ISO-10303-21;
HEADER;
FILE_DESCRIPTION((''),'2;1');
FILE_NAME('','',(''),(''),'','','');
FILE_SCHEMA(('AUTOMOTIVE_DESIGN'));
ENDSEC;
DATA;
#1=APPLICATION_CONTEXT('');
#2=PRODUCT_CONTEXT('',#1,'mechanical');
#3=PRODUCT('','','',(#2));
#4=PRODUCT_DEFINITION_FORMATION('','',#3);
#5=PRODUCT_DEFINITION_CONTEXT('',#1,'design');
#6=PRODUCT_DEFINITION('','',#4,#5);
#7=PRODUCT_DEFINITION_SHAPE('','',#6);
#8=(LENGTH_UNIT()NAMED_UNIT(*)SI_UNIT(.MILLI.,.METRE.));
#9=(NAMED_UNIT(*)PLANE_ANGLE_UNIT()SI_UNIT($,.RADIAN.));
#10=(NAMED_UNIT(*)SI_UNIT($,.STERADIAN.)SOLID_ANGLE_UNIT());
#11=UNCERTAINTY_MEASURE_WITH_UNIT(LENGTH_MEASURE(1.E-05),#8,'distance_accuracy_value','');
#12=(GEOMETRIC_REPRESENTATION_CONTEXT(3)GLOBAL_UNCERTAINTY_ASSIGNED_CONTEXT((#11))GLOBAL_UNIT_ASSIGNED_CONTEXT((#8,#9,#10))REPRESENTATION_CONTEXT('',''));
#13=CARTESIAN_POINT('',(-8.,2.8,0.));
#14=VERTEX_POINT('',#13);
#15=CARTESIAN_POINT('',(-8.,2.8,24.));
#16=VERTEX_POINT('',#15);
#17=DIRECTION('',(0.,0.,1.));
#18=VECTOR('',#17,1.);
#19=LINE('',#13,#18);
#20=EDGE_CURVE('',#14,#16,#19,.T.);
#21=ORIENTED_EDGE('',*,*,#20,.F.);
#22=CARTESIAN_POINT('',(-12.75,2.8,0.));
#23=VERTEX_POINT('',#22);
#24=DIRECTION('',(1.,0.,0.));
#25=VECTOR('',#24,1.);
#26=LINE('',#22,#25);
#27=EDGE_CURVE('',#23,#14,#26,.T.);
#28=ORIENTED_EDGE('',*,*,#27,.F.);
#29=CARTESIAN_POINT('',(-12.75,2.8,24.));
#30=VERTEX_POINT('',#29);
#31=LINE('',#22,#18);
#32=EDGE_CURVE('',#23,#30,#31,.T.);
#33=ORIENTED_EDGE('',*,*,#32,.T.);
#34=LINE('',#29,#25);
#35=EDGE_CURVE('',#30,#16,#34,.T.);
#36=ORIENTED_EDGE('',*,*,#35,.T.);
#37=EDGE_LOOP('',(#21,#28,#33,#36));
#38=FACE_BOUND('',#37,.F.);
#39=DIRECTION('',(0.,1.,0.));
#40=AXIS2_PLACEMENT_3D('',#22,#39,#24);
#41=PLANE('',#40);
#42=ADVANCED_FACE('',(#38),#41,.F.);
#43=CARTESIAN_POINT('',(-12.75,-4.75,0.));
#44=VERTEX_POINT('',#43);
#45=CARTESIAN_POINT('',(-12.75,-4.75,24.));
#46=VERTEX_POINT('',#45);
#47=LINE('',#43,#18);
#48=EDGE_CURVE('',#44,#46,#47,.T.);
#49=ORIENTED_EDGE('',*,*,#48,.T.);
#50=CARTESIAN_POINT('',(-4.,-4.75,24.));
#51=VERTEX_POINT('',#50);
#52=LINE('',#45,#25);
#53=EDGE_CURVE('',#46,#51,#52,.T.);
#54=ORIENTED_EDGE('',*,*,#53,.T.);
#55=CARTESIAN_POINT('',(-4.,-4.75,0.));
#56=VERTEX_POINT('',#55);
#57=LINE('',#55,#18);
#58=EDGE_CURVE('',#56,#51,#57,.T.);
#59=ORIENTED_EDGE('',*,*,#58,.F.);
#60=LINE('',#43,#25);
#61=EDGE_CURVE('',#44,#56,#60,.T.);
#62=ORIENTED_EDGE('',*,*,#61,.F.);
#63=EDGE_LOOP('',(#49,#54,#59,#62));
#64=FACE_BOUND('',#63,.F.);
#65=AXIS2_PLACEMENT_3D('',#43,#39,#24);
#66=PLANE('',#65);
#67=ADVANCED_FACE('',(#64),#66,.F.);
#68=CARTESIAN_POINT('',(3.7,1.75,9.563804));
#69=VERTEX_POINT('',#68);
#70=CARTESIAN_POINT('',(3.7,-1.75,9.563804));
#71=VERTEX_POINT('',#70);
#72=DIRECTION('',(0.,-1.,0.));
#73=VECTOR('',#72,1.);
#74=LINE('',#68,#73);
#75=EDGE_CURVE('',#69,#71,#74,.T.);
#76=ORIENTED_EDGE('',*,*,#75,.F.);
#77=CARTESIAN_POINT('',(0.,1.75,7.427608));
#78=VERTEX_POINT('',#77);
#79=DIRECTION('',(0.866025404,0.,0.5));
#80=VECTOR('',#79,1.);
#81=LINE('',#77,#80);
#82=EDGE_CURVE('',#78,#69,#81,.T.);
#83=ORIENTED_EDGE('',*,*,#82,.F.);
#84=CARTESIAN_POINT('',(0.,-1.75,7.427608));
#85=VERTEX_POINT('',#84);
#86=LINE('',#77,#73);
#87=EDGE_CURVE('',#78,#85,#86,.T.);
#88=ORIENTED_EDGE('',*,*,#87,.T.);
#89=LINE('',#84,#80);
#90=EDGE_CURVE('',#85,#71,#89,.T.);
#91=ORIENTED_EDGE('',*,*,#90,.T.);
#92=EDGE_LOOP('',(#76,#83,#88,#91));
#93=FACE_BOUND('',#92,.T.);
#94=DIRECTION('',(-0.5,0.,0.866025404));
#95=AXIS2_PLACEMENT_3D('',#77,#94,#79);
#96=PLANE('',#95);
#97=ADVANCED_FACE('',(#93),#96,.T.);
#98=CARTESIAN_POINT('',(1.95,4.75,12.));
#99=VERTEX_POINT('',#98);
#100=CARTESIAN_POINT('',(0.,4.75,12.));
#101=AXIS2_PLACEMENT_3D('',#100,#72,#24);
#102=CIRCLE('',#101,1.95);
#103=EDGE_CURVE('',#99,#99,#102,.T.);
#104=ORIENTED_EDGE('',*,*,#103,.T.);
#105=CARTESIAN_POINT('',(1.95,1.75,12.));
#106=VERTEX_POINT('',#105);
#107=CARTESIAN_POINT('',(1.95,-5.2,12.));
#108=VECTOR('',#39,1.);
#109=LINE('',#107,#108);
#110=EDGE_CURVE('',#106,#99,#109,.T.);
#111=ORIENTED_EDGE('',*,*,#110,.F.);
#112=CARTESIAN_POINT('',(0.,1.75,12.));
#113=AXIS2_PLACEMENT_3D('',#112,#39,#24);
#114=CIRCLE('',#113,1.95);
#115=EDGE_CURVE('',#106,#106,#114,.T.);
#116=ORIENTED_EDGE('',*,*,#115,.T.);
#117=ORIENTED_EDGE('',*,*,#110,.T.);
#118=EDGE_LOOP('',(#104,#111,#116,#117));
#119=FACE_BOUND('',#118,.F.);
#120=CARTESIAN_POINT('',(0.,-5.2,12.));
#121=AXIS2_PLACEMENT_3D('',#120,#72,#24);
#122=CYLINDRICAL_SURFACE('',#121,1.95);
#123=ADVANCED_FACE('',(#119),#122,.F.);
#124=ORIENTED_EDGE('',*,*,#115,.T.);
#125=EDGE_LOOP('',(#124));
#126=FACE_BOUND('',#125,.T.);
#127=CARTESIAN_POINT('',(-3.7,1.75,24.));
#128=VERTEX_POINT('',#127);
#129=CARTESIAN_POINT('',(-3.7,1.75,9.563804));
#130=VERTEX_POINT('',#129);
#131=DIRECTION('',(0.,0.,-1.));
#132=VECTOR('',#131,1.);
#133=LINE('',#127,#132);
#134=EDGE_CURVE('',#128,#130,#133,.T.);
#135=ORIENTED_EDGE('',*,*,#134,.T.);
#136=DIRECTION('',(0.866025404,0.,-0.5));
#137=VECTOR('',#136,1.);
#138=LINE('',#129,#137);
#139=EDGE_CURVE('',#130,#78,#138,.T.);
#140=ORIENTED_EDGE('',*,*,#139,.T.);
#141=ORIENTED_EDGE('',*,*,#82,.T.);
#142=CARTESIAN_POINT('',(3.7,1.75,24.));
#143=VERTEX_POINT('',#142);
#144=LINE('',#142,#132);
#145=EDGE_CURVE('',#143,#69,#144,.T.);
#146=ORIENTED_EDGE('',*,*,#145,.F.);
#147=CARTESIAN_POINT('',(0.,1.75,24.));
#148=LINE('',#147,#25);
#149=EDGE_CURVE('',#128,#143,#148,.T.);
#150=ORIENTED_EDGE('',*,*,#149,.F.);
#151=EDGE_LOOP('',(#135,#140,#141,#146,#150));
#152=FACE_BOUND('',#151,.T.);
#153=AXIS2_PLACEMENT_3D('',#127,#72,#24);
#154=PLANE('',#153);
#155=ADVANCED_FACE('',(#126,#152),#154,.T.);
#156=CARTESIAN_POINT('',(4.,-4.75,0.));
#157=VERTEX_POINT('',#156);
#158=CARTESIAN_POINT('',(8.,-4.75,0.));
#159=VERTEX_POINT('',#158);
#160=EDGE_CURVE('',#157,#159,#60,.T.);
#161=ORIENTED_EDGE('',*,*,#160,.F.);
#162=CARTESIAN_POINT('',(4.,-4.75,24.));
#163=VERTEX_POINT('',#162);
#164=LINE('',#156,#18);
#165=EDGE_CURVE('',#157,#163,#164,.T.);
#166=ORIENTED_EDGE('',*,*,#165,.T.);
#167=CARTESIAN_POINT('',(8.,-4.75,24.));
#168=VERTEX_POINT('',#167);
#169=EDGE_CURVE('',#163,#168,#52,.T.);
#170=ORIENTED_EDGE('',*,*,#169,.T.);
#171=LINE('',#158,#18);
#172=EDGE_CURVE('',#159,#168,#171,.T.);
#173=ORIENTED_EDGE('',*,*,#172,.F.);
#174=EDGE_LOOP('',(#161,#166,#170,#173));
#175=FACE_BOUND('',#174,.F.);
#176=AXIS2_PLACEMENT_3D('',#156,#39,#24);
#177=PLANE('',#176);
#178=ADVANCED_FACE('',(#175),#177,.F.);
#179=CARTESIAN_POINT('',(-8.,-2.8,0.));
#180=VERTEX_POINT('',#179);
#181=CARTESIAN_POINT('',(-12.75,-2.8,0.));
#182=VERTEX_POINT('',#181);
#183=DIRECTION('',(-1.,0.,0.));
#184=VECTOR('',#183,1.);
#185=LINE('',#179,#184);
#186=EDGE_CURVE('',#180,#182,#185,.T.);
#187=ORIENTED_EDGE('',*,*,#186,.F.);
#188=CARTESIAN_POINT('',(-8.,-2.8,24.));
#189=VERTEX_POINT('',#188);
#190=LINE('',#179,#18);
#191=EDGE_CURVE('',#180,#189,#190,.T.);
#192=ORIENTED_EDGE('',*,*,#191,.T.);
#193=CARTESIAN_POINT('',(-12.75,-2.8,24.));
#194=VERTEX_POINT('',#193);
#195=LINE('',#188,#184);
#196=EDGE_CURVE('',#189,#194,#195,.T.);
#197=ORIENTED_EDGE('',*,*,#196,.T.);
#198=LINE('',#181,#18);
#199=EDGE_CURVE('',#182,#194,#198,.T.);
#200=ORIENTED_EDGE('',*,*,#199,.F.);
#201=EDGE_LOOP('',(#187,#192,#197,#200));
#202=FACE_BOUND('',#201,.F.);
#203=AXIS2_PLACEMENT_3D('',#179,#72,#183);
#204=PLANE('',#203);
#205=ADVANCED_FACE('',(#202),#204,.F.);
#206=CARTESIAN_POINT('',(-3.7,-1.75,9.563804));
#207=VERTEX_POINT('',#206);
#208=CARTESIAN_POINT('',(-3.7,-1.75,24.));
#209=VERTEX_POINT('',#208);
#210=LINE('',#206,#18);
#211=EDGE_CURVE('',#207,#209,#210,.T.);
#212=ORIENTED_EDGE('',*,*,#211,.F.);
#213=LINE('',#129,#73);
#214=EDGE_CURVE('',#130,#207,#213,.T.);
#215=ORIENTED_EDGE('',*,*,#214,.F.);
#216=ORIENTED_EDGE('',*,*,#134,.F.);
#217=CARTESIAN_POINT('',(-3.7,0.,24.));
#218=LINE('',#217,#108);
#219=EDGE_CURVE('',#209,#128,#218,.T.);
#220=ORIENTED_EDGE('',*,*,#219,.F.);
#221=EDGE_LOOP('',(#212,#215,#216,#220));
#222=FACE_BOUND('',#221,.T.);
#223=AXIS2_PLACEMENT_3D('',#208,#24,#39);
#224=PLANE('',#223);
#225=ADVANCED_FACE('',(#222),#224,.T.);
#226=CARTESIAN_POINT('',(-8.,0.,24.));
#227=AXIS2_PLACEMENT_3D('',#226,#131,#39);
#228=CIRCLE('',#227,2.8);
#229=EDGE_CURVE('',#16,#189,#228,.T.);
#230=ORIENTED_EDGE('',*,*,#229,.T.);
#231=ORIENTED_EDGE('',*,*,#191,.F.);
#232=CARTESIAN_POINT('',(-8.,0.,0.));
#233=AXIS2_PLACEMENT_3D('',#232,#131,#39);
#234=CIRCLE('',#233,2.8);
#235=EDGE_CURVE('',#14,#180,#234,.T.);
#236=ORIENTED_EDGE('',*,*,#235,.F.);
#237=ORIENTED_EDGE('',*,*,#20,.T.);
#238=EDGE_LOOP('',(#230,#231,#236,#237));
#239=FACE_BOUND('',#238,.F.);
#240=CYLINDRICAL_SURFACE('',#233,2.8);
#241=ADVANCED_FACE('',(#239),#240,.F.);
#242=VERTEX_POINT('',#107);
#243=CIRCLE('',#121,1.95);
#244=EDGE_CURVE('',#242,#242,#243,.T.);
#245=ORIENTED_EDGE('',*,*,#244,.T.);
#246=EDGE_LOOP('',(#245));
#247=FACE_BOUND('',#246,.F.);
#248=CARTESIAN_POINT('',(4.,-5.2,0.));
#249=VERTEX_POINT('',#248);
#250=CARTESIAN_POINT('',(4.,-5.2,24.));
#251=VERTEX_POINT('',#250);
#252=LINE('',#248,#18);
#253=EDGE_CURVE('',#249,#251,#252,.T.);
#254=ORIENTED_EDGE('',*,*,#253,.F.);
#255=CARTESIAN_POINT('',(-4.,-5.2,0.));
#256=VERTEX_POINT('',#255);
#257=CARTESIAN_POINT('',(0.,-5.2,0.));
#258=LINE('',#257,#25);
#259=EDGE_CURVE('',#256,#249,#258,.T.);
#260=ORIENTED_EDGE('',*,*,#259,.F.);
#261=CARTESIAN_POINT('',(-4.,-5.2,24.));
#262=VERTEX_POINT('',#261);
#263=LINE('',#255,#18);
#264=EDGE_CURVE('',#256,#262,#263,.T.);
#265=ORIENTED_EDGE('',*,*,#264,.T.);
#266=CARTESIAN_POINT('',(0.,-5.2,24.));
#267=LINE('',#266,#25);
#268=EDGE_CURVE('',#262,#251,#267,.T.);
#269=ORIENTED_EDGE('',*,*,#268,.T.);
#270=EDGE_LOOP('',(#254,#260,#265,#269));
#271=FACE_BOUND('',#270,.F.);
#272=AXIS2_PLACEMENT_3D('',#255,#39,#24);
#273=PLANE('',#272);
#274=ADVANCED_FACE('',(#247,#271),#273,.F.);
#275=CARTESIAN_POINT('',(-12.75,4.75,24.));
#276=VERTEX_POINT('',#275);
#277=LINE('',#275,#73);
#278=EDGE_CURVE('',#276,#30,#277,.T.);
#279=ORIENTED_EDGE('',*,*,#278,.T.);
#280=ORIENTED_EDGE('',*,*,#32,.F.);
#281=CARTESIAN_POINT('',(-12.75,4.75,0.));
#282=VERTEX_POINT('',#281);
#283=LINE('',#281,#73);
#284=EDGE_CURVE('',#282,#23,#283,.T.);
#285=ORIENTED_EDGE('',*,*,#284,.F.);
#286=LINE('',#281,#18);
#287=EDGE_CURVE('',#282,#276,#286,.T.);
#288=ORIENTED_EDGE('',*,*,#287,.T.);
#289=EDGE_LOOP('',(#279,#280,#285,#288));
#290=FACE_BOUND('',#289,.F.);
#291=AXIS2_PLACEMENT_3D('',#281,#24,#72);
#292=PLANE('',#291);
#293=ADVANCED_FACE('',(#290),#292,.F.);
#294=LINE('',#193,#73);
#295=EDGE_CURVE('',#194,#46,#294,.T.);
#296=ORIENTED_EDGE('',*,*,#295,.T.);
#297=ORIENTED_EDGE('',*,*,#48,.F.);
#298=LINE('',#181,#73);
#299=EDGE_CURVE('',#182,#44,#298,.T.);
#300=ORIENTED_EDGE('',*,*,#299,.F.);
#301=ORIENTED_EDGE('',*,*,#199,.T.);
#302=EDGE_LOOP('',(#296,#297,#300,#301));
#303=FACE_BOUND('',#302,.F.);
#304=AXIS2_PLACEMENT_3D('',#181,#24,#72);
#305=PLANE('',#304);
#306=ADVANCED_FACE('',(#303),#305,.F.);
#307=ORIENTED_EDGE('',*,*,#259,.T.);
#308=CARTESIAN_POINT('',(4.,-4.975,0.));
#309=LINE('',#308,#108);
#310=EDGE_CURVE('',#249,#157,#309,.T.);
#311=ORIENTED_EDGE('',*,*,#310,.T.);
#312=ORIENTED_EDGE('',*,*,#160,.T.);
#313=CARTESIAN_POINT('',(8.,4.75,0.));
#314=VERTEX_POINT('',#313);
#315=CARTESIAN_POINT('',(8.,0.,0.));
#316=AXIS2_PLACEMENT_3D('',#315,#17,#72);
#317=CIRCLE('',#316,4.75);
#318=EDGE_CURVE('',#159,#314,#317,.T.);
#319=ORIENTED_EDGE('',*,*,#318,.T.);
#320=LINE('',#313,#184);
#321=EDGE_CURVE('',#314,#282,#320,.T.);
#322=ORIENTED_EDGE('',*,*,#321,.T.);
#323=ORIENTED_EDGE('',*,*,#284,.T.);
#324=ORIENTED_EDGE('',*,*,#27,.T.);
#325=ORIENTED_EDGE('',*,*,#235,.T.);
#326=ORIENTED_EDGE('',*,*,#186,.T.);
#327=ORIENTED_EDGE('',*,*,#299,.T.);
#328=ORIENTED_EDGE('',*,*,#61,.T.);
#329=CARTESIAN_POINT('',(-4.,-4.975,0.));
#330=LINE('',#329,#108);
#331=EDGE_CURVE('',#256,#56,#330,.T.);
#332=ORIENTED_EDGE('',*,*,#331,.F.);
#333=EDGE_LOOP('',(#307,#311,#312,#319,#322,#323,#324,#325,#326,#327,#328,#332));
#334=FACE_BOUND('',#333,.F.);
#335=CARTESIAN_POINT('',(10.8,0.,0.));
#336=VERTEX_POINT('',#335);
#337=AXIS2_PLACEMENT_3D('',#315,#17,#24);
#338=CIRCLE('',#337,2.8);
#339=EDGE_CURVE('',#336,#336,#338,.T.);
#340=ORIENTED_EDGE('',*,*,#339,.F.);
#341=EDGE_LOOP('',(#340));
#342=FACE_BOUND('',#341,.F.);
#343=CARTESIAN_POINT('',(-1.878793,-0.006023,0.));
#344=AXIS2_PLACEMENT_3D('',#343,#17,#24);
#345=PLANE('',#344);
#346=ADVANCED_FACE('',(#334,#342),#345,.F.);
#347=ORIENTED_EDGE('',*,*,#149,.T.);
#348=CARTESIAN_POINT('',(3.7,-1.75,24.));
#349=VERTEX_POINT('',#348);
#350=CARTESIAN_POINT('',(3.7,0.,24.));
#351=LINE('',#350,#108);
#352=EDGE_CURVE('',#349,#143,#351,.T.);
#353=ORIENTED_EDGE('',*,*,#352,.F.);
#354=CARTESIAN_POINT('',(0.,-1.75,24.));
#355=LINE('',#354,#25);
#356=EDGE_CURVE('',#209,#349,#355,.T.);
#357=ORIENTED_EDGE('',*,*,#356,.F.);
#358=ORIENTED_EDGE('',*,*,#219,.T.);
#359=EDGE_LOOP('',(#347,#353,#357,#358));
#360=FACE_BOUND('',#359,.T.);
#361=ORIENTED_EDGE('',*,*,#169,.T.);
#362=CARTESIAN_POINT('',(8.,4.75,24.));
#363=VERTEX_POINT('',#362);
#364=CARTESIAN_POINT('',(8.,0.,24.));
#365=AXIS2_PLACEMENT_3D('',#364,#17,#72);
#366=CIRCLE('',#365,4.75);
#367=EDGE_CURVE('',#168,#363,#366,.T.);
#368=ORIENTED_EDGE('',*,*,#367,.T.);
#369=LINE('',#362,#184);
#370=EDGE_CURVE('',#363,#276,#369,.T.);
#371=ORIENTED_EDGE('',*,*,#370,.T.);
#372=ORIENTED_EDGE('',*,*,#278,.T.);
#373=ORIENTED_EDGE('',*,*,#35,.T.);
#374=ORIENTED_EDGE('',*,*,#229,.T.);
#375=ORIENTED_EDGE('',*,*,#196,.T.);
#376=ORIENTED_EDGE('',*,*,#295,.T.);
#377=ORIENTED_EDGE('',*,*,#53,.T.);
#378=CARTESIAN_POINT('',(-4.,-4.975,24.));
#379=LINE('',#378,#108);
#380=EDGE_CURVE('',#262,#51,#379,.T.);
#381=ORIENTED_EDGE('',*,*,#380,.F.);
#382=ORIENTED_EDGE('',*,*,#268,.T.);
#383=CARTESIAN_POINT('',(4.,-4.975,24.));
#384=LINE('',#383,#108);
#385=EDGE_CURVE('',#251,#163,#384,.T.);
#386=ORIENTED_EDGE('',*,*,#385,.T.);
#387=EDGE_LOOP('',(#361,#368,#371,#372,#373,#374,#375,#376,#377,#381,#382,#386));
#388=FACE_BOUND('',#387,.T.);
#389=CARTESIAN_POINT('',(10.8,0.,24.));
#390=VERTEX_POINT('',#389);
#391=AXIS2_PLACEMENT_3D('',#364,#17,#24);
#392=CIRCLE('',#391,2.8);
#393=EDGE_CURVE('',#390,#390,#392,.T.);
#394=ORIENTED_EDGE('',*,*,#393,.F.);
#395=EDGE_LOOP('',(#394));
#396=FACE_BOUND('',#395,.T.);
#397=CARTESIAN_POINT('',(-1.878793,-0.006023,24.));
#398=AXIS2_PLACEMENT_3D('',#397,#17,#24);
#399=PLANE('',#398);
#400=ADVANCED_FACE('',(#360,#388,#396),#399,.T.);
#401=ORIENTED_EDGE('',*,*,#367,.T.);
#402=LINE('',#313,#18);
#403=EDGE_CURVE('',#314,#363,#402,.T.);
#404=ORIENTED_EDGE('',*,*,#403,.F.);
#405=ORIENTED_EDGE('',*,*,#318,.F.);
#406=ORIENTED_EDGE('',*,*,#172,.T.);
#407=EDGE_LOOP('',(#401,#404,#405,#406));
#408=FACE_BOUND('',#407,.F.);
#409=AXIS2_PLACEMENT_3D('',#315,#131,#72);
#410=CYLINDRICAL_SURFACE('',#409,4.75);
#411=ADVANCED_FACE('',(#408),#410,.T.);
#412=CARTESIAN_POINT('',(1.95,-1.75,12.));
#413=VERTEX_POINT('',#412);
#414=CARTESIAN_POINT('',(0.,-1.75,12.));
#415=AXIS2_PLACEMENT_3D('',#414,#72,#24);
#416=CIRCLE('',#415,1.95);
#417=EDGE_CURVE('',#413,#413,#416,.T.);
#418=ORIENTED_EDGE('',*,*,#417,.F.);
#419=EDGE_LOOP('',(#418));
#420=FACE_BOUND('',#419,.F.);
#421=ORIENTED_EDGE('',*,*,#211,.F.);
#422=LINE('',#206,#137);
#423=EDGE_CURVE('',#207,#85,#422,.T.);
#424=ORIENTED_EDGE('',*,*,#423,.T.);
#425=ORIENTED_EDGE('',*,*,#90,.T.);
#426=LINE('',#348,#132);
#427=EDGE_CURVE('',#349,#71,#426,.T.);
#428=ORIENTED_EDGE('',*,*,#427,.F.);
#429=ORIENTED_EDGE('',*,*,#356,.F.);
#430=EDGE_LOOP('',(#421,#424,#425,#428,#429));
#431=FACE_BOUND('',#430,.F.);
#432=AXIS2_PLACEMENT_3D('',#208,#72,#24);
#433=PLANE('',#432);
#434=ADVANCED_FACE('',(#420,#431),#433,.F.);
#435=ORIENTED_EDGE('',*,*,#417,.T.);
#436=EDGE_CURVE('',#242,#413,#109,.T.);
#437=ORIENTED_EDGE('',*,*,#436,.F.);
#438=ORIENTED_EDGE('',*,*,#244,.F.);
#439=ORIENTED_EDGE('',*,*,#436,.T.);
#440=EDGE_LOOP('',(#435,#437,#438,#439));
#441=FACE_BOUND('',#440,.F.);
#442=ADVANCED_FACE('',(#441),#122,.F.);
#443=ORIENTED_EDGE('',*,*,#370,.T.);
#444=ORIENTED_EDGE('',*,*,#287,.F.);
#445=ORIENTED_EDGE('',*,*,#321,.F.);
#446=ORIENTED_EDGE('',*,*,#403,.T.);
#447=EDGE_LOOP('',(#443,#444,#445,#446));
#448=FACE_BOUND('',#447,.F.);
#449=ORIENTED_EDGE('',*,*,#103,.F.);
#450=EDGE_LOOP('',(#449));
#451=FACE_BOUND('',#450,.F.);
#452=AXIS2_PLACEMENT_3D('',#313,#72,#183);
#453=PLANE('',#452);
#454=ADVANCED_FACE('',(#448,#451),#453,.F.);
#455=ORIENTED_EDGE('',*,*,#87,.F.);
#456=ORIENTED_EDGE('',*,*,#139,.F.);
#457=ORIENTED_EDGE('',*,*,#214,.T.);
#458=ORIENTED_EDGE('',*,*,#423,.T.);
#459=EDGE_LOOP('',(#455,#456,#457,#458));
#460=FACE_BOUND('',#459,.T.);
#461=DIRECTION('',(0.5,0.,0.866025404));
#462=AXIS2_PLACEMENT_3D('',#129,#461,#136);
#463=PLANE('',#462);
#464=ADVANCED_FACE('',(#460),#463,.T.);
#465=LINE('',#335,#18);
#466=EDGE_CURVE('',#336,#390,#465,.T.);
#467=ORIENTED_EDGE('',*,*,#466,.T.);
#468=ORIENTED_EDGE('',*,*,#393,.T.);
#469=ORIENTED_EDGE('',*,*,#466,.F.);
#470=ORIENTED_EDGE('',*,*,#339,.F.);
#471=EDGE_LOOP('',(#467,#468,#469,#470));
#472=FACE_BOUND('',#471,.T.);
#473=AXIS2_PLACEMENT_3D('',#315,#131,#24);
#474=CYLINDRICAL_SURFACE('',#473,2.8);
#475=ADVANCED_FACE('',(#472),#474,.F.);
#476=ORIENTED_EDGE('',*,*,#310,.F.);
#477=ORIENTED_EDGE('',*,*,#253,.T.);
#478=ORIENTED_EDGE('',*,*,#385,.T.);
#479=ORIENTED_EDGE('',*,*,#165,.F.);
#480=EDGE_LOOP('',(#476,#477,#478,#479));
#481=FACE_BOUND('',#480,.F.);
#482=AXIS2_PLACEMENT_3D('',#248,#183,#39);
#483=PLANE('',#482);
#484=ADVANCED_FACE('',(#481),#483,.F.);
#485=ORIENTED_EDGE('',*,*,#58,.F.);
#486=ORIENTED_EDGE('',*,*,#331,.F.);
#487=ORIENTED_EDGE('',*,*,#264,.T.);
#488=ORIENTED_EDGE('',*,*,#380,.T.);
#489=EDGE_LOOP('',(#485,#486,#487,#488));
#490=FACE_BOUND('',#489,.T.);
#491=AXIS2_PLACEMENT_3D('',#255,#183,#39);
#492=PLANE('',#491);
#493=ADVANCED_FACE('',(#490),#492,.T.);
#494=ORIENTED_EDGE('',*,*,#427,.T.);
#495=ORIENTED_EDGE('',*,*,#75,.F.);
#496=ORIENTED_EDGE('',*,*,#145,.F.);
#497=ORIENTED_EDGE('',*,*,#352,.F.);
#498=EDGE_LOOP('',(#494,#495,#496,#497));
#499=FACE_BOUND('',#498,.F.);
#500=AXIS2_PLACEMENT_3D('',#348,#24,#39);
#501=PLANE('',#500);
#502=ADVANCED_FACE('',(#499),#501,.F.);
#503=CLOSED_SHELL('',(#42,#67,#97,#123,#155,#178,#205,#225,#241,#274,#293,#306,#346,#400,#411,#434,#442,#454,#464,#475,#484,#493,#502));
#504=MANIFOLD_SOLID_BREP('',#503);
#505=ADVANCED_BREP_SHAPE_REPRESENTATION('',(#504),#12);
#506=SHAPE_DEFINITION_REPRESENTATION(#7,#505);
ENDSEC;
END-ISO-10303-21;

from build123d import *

# Parameters (mm, degrees)
F0_R     = 2.8
F0_W     = 8
F0_H     = 0.45
F1_DEPTH = 24
F2_R     = 1.95
F3_DEPTH = 9.951
F4_W     = 7.4
F4_H     = 3.5
F5_DEPTH = 12
F7_DEPTH = 3.5


# Not quite as in the source:
# - a feature names something its author has since deleted; it is built from what else it names


with BuildPart() as f1:
    # F0 (on Top) → F1 (new body)
    with BuildSketch(Plane.XY):
        with BuildLine():
            ThreePointArc((-8, 2.8), (-5.2, 0), (-8, -2.8))
            Line((-8, -2.8), (-12.75, -2.8))
            Line((-12.75, -2.8), (-12.75, -4.75))
            Line((-12.75, -4.75), (-8, -4.75))
            Line((-8, -4.75), (-4, -4.75))
            Line((-4, -4.75), (-4, -4.3))
            Line((-4, -4.3), (4, -4.3))
            Line((4, -4.3), (4, -4.75))
            Line((4, -4.75), (8, -4.75))
            ThreePointArc((8, -4.75), (12.75, 0), (8, 4.75))
            Line((8, 4.75), (-8, 4.75))
            Line((-8, 4.75), (-12.75, 4.75))
            Line((-12.75, 4.75), (-12.75, 2.8))
            Line((-12.75, 2.8), (-8, 2.8))
        make_face()
        with Locations((8, 0)):
            Circle(F0_R, mode=Mode.SUBTRACT)
        with Locations((0, -4.525)):
            Rectangle(F0_W, F0_H)
        with Locations((0, -4.975)):
            Rectangle(F0_W, F0_H)
    extrude(amount=F1_DEPTH)

    # F2 (on face) → F3 (cut, through all)
    with BuildSketch(Plane.XZ.offset(5.2)):
        with Locations((0, 12)):
            Circle(F2_R)
    extrude(amount=-F3_DEPTH, mode=Mode.SUBTRACT)

    # F4 (on face) → F5 (cut)
    with BuildSketch(Plane.XY.offset(24)):
        Rectangle(F4_W, F4_H)
    extrude(amount=-F5_DEPTH, mode=Mode.SUBTRACT)

    # F6 (on face) → F7 (cut, through all)
    with BuildSketch(Plane.XZ.offset(-1.75)):
        Polygon((3.7, 9.563804004), (3.7, 13.836195996), (0, 15.972391992), (-3.7, 13.836195996), (-3.7, 9.563804004), (0, 7.427608008), align=None)
    extrude(amount=F7_DEPTH, mode=Mode.SUBTRACT)


solid = f1.part
